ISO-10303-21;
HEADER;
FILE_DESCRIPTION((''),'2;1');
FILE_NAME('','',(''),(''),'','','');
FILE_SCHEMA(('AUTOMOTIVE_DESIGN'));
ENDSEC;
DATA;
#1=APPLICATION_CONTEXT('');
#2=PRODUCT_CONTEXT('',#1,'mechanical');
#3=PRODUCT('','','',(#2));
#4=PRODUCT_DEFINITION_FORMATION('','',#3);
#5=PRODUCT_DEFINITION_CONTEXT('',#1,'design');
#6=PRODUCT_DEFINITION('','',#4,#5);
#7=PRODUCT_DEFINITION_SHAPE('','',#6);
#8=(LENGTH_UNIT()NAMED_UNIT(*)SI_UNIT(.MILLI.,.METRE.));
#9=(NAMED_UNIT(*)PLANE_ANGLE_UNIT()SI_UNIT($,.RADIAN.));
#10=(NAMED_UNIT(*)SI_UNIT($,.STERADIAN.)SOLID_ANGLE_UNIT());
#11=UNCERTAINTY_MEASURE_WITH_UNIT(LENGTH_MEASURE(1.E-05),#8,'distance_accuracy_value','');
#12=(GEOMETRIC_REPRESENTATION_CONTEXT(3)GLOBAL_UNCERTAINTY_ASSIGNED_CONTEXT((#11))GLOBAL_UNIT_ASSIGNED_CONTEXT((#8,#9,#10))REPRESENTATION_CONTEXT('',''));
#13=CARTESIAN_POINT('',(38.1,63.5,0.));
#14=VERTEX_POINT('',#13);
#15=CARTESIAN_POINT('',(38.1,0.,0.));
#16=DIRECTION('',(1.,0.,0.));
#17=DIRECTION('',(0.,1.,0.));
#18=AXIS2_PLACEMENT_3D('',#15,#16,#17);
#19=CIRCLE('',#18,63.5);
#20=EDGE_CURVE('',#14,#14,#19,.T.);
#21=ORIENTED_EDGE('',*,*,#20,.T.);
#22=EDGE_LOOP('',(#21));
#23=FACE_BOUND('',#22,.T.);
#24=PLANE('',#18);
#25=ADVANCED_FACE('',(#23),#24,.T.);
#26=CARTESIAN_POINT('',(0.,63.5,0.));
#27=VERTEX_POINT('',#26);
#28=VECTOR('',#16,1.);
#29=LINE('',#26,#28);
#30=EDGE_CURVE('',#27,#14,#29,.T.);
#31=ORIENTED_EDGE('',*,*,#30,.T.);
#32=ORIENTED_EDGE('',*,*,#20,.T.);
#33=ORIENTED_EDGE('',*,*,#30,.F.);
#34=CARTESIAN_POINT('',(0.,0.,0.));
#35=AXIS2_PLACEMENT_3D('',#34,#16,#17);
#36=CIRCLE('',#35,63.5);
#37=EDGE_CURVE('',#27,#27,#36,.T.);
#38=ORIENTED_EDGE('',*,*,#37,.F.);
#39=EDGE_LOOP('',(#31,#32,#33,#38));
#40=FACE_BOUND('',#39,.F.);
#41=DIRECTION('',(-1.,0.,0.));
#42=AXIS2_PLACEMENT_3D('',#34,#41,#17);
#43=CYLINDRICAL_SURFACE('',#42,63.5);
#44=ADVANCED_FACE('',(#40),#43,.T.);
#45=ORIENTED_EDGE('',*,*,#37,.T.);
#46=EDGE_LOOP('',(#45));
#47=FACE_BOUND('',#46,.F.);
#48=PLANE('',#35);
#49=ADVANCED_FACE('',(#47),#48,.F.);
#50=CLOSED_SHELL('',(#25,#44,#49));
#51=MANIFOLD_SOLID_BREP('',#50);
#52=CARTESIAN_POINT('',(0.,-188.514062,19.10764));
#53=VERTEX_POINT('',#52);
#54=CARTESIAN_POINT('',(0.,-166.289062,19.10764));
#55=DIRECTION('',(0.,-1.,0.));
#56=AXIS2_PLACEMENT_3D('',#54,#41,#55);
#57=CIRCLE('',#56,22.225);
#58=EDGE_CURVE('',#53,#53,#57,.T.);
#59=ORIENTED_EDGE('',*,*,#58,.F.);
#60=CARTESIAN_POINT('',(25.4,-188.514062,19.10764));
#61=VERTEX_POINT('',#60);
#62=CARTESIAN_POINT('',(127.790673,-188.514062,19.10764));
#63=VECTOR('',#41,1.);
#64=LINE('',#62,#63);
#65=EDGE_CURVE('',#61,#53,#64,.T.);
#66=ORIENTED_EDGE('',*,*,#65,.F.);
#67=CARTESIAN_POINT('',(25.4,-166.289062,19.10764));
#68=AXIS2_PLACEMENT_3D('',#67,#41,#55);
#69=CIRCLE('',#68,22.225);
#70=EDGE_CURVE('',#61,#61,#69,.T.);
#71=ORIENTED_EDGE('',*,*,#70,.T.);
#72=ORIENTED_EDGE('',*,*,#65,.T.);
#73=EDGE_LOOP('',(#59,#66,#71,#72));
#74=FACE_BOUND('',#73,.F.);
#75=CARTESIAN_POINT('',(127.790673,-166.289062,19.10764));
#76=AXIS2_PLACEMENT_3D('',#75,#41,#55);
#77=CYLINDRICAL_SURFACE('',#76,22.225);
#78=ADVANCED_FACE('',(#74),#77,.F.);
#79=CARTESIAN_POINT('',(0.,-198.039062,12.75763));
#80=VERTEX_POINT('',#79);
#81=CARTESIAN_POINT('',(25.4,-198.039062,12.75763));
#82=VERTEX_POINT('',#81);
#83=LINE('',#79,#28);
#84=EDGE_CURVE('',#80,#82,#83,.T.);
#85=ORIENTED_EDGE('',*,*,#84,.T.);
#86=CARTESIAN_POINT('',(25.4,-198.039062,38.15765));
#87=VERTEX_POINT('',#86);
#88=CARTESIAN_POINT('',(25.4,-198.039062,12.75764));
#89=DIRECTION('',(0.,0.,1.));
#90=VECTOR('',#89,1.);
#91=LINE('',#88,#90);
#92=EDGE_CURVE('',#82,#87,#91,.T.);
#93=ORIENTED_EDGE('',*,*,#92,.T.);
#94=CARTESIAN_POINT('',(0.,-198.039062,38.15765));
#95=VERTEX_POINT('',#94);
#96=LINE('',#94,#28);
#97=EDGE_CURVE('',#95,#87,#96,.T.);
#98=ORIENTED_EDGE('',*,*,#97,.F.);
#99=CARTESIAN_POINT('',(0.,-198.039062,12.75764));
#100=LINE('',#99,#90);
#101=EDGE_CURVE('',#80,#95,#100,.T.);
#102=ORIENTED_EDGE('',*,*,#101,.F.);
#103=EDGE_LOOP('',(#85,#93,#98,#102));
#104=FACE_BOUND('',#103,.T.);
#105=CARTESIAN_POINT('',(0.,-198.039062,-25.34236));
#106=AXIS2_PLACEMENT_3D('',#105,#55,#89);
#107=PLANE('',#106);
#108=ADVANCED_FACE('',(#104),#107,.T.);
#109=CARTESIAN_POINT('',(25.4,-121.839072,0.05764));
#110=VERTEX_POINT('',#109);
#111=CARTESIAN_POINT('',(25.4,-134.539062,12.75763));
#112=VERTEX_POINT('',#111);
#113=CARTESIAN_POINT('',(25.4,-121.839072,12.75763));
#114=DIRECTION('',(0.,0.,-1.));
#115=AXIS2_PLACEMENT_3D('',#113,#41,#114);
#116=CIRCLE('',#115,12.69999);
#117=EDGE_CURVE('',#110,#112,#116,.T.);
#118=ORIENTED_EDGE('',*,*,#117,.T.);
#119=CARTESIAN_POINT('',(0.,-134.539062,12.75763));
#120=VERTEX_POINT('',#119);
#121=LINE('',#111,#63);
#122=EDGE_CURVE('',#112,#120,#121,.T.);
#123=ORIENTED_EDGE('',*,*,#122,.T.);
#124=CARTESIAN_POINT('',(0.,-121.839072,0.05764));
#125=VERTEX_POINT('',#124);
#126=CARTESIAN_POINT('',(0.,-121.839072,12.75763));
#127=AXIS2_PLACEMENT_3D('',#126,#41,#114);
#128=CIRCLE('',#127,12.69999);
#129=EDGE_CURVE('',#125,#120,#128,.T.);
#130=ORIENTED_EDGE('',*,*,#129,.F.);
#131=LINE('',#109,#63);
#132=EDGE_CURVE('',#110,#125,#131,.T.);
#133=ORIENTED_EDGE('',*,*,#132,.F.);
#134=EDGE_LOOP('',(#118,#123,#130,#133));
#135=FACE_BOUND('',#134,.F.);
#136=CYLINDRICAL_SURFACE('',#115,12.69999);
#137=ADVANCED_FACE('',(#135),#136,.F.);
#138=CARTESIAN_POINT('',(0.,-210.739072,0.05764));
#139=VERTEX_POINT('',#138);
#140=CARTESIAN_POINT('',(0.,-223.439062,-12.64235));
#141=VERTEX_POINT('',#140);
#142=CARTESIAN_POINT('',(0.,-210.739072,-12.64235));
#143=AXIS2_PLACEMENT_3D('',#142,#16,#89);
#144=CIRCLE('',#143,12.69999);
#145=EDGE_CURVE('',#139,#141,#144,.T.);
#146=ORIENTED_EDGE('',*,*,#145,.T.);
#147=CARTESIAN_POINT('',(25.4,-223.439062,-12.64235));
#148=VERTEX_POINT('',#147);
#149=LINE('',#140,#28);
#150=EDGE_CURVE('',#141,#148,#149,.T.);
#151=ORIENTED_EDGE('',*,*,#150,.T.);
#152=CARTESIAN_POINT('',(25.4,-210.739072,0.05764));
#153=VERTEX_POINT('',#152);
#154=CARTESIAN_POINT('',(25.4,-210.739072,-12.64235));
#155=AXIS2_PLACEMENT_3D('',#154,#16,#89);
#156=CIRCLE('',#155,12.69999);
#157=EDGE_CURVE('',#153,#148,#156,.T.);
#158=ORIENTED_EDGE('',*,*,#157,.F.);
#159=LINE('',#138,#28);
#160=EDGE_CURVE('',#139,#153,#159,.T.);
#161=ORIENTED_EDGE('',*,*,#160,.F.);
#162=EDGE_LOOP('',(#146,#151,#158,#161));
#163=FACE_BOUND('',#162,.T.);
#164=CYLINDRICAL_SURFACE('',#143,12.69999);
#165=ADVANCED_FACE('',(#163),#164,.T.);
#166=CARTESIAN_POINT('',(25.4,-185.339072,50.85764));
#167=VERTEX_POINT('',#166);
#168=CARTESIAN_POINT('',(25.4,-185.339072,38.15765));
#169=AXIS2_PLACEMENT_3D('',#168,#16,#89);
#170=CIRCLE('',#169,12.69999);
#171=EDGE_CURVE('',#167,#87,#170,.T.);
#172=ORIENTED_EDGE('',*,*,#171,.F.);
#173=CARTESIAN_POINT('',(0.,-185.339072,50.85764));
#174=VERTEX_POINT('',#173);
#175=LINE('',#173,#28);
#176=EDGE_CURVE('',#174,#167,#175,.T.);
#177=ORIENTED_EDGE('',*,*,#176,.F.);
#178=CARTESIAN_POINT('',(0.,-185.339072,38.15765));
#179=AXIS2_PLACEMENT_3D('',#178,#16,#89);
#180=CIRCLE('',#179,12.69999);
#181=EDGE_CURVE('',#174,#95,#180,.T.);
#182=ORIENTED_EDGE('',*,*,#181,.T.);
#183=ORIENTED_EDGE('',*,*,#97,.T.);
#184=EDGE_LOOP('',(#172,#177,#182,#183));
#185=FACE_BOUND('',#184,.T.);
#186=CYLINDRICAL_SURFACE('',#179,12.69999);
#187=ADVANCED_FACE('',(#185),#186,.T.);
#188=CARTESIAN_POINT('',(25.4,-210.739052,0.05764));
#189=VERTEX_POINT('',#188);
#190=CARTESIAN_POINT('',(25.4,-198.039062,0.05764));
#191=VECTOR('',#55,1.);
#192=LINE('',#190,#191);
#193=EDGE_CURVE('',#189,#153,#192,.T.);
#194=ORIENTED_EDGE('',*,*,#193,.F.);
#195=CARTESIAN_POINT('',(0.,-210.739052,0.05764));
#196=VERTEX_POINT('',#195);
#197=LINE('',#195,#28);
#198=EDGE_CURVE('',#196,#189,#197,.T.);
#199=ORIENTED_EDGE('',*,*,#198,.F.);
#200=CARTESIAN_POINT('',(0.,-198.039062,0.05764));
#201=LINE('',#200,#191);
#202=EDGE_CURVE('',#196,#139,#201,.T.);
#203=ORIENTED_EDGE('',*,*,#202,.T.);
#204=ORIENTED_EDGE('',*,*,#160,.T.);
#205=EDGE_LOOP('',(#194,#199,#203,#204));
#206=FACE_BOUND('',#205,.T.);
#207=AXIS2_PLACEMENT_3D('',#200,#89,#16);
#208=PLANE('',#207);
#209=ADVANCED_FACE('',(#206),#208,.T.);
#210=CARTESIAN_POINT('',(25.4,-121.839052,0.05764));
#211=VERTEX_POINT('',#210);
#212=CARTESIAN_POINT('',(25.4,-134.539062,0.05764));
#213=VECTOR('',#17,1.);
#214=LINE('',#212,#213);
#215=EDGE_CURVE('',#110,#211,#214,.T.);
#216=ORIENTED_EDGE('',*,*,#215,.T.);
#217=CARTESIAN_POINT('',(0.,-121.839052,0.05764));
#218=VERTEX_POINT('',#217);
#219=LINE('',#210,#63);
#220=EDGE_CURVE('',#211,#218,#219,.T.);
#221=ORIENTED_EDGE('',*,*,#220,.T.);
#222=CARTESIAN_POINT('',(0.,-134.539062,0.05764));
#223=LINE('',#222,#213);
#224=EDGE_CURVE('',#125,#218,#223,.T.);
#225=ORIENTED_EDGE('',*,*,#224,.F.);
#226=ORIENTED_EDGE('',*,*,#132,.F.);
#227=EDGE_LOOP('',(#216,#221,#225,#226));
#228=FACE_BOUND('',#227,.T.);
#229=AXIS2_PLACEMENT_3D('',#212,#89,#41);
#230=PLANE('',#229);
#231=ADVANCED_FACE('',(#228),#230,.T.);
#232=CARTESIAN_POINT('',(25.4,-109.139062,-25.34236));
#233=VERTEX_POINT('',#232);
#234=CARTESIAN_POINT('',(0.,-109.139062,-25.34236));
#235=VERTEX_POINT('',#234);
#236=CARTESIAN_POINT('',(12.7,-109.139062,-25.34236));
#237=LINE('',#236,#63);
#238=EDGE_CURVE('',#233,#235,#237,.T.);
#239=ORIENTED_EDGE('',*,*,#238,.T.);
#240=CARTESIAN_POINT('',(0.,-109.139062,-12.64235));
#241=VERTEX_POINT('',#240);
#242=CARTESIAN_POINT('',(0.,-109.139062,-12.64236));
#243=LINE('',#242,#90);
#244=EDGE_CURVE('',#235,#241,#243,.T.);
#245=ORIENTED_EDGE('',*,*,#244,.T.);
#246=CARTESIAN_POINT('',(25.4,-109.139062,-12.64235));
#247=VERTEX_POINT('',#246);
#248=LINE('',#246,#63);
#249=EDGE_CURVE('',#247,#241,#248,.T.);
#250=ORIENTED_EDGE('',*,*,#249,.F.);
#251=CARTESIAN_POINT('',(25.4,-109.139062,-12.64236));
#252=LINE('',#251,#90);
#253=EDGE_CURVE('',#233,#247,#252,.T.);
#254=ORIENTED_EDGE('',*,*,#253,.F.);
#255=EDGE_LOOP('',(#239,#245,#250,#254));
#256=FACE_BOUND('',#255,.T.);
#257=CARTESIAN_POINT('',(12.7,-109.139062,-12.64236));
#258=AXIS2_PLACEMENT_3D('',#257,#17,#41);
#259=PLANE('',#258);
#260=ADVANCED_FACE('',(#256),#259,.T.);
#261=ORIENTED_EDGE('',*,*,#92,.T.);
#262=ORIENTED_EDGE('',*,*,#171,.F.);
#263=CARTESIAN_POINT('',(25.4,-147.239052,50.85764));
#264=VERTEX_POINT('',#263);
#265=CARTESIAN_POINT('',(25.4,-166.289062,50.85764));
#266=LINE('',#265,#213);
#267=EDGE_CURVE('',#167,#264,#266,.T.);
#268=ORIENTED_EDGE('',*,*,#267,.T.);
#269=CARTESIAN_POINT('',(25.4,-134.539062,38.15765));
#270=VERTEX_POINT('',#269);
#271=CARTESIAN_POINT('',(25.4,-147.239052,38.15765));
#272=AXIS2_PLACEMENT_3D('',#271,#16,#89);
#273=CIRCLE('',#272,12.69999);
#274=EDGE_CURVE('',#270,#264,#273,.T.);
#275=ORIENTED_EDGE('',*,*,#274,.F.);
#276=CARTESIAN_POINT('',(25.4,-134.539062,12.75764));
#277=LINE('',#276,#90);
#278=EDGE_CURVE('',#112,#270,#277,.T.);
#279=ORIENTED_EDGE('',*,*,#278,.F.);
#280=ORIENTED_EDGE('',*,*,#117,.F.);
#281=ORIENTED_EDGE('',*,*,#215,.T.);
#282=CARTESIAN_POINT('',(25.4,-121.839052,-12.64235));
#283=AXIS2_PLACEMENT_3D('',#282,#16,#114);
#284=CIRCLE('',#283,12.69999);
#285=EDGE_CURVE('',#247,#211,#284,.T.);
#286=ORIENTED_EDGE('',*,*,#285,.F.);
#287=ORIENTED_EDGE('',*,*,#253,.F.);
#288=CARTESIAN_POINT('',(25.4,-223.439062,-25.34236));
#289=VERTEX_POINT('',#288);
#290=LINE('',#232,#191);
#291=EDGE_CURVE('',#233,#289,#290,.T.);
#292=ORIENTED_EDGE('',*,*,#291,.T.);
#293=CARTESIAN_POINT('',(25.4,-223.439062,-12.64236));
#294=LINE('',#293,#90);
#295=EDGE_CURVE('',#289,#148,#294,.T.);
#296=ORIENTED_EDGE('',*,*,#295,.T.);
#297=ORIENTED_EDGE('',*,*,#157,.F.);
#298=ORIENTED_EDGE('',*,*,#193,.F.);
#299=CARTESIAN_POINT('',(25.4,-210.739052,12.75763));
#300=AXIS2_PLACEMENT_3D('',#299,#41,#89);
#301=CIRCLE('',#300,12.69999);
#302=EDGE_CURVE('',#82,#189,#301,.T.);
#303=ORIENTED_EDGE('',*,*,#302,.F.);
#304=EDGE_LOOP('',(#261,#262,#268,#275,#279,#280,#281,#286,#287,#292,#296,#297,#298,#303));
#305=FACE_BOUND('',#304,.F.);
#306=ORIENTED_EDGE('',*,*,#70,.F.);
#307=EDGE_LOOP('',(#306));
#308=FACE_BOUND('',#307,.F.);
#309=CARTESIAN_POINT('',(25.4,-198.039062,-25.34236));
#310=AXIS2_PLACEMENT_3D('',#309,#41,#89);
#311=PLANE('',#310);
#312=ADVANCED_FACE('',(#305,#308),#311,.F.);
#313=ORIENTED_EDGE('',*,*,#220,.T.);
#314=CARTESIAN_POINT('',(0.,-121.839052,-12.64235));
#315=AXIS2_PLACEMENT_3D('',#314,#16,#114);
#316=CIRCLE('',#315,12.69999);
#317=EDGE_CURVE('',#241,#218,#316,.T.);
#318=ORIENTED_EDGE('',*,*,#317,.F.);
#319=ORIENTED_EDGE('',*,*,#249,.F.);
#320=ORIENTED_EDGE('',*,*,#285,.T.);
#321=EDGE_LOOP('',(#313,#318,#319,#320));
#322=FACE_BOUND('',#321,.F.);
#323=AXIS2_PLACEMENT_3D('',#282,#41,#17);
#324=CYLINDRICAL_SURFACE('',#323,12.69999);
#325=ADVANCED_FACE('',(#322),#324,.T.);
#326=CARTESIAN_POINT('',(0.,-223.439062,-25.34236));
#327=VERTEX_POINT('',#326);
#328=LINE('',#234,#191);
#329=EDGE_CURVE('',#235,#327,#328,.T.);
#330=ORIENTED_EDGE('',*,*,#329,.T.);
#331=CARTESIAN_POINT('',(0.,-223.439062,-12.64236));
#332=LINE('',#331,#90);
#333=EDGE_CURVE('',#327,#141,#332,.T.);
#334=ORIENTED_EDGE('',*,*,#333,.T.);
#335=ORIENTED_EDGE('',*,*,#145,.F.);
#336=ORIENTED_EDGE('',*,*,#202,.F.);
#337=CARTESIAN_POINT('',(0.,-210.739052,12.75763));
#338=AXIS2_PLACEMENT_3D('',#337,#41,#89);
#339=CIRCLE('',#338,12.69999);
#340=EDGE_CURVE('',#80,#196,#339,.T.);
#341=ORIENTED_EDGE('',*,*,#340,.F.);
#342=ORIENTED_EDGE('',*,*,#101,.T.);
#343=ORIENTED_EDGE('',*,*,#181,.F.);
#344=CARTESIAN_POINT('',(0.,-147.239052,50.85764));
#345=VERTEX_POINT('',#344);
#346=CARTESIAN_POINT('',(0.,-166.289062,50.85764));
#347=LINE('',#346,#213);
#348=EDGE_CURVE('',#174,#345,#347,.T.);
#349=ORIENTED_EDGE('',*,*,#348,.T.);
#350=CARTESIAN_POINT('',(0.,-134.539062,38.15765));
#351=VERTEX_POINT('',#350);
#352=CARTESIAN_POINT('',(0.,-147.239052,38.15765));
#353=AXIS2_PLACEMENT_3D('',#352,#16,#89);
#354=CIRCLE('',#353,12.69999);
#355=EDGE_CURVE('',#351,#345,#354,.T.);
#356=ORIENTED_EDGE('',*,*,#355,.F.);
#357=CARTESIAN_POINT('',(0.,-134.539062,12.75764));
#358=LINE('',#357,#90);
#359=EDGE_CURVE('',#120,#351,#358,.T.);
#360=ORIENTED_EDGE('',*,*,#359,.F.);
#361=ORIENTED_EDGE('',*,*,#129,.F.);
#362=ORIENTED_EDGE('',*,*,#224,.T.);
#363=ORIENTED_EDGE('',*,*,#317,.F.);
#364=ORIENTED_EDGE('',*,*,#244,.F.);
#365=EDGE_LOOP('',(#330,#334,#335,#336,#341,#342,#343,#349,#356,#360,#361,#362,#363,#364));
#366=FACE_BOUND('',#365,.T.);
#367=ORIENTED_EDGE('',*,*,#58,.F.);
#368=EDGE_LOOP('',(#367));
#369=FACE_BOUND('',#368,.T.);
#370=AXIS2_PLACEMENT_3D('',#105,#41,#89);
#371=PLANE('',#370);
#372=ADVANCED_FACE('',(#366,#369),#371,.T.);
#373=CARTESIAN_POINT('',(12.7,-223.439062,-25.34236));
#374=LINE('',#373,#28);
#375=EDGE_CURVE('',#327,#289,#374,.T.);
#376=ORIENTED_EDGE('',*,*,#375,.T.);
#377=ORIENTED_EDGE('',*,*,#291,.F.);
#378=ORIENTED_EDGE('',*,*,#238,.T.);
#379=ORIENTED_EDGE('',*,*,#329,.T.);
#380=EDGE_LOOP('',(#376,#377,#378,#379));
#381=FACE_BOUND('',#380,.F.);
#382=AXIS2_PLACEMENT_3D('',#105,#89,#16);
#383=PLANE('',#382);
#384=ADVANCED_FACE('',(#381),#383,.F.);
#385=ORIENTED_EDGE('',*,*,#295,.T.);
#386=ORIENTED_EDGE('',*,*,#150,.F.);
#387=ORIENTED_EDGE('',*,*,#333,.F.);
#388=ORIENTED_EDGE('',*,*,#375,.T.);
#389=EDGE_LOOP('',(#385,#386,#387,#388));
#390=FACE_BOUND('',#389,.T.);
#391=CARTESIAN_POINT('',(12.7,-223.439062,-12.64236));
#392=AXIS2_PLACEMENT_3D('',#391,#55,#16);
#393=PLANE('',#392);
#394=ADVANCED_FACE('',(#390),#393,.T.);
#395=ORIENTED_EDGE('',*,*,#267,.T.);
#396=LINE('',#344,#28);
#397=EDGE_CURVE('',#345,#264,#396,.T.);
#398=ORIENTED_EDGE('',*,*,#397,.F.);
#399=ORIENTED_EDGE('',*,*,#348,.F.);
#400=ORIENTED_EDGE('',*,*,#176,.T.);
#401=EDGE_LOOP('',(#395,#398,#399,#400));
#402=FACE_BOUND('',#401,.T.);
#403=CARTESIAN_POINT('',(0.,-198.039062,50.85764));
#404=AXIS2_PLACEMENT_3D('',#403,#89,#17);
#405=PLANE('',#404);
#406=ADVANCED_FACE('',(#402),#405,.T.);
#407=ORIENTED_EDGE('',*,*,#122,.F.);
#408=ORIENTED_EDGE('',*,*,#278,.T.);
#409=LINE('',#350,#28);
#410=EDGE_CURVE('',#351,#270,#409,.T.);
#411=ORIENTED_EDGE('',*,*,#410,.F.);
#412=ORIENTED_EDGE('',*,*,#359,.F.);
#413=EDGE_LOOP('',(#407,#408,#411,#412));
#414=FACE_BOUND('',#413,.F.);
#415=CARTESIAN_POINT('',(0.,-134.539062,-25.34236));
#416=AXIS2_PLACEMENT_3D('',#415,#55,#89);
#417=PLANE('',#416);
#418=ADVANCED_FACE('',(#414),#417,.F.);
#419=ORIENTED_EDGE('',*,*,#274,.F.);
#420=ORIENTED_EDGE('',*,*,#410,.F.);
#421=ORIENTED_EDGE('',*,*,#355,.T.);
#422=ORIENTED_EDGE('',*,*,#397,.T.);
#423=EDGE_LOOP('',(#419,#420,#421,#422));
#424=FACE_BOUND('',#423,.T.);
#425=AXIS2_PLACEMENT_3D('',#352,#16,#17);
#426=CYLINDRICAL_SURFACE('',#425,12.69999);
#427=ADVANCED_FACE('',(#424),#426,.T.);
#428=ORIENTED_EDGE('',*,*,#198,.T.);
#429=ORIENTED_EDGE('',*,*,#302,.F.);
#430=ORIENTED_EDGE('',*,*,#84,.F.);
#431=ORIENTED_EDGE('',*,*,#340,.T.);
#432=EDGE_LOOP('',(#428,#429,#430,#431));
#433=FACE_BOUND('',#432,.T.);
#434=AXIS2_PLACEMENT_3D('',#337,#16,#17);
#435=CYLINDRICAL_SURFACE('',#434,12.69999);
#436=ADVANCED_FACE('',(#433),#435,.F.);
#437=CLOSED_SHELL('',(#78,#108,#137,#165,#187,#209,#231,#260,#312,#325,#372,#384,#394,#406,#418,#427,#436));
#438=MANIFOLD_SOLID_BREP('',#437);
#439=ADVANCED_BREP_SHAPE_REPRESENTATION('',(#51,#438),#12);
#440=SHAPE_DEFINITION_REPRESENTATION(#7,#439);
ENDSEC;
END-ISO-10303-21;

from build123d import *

# Parameters (mm, degrees)
F0_R     = 63.5
F1_DEPTH = 38.1
F2_W     = 63.5
F2_H     = 76.2
F3_DEPTH = 25.4
F5_D     = 44.45
F7_W     = 25.4
F7_H     = 25.4
F8_DEPTH = 25.4
F6_W     = 25.4
F6_H     = 25.4
F9_DEPTH = 25.4
F10_R    = 12.69999


# Not quite as in the source:
# - a fillet or chamfer is up to 0.001 mm smaller than in the source, because OpenCascade refuses the exact size


with BuildPart() as f1:
    # F0 (on Right) → F1 (new body)
    with BuildSketch(Plane.YZ):
        Circle(F0_R)
    extrude(amount=F1_DEPTH)


with BuildPart() as f3:
    # F2 (on Right) → F3 (new body)
    with BuildSketch(Plane.YZ):
        with Locations((-166.2890618503, 12.7576400614)):
            Rectangle(F2_W, F2_H)
    extrude(amount=F3_DEPTH)

    # F5 (through all)
    with Locations(Plane.YZ.offset(25.4)):
        with Locations((-166.2890618503, 19.1076400614)):
            Hole(F5_D / 2)

    # F7 (on face) → F8 (join)
    with BuildSketch(Plane(origin=(0, -134.5390618503, 0), x_dir=(-1, 0, 0), z_dir=(0, 1, 0))):
        with Locations((-12.7, -12.6423599386)):
            Rectangle(F7_W, F7_H)
    extrude(amount=F8_DEPTH)

    # F6 (on face) → F9 (join)
    with BuildSketch(Plane.XZ.offset(198.0390618503)):
        with Locations((12.7, -12.6423599386)):
            Rectangle(F6_W, F6_H)
    extrude(amount=F9_DEPTH)

    # F10 (radius 12.7 in the source; OpenCascade refuses exactly that, so slightly less here)
    f10_edges = [f3.edges().sort_by_distance(p)[0] for p in [
        (12.7, -223.439062, 0.05764),
        (12.7, -198.039062, 0.05764),
        (12.7, -198.039062, 50.85764),
        (12.7, -134.539062, 50.85764),
        (12.7, -134.539062, 0.05764),
        (12.7, -109.139062, 0.05764),
    ]]
    fillet(f10_edges, radius=F10_R)


solid = Compound([f1.part, f3.part])
